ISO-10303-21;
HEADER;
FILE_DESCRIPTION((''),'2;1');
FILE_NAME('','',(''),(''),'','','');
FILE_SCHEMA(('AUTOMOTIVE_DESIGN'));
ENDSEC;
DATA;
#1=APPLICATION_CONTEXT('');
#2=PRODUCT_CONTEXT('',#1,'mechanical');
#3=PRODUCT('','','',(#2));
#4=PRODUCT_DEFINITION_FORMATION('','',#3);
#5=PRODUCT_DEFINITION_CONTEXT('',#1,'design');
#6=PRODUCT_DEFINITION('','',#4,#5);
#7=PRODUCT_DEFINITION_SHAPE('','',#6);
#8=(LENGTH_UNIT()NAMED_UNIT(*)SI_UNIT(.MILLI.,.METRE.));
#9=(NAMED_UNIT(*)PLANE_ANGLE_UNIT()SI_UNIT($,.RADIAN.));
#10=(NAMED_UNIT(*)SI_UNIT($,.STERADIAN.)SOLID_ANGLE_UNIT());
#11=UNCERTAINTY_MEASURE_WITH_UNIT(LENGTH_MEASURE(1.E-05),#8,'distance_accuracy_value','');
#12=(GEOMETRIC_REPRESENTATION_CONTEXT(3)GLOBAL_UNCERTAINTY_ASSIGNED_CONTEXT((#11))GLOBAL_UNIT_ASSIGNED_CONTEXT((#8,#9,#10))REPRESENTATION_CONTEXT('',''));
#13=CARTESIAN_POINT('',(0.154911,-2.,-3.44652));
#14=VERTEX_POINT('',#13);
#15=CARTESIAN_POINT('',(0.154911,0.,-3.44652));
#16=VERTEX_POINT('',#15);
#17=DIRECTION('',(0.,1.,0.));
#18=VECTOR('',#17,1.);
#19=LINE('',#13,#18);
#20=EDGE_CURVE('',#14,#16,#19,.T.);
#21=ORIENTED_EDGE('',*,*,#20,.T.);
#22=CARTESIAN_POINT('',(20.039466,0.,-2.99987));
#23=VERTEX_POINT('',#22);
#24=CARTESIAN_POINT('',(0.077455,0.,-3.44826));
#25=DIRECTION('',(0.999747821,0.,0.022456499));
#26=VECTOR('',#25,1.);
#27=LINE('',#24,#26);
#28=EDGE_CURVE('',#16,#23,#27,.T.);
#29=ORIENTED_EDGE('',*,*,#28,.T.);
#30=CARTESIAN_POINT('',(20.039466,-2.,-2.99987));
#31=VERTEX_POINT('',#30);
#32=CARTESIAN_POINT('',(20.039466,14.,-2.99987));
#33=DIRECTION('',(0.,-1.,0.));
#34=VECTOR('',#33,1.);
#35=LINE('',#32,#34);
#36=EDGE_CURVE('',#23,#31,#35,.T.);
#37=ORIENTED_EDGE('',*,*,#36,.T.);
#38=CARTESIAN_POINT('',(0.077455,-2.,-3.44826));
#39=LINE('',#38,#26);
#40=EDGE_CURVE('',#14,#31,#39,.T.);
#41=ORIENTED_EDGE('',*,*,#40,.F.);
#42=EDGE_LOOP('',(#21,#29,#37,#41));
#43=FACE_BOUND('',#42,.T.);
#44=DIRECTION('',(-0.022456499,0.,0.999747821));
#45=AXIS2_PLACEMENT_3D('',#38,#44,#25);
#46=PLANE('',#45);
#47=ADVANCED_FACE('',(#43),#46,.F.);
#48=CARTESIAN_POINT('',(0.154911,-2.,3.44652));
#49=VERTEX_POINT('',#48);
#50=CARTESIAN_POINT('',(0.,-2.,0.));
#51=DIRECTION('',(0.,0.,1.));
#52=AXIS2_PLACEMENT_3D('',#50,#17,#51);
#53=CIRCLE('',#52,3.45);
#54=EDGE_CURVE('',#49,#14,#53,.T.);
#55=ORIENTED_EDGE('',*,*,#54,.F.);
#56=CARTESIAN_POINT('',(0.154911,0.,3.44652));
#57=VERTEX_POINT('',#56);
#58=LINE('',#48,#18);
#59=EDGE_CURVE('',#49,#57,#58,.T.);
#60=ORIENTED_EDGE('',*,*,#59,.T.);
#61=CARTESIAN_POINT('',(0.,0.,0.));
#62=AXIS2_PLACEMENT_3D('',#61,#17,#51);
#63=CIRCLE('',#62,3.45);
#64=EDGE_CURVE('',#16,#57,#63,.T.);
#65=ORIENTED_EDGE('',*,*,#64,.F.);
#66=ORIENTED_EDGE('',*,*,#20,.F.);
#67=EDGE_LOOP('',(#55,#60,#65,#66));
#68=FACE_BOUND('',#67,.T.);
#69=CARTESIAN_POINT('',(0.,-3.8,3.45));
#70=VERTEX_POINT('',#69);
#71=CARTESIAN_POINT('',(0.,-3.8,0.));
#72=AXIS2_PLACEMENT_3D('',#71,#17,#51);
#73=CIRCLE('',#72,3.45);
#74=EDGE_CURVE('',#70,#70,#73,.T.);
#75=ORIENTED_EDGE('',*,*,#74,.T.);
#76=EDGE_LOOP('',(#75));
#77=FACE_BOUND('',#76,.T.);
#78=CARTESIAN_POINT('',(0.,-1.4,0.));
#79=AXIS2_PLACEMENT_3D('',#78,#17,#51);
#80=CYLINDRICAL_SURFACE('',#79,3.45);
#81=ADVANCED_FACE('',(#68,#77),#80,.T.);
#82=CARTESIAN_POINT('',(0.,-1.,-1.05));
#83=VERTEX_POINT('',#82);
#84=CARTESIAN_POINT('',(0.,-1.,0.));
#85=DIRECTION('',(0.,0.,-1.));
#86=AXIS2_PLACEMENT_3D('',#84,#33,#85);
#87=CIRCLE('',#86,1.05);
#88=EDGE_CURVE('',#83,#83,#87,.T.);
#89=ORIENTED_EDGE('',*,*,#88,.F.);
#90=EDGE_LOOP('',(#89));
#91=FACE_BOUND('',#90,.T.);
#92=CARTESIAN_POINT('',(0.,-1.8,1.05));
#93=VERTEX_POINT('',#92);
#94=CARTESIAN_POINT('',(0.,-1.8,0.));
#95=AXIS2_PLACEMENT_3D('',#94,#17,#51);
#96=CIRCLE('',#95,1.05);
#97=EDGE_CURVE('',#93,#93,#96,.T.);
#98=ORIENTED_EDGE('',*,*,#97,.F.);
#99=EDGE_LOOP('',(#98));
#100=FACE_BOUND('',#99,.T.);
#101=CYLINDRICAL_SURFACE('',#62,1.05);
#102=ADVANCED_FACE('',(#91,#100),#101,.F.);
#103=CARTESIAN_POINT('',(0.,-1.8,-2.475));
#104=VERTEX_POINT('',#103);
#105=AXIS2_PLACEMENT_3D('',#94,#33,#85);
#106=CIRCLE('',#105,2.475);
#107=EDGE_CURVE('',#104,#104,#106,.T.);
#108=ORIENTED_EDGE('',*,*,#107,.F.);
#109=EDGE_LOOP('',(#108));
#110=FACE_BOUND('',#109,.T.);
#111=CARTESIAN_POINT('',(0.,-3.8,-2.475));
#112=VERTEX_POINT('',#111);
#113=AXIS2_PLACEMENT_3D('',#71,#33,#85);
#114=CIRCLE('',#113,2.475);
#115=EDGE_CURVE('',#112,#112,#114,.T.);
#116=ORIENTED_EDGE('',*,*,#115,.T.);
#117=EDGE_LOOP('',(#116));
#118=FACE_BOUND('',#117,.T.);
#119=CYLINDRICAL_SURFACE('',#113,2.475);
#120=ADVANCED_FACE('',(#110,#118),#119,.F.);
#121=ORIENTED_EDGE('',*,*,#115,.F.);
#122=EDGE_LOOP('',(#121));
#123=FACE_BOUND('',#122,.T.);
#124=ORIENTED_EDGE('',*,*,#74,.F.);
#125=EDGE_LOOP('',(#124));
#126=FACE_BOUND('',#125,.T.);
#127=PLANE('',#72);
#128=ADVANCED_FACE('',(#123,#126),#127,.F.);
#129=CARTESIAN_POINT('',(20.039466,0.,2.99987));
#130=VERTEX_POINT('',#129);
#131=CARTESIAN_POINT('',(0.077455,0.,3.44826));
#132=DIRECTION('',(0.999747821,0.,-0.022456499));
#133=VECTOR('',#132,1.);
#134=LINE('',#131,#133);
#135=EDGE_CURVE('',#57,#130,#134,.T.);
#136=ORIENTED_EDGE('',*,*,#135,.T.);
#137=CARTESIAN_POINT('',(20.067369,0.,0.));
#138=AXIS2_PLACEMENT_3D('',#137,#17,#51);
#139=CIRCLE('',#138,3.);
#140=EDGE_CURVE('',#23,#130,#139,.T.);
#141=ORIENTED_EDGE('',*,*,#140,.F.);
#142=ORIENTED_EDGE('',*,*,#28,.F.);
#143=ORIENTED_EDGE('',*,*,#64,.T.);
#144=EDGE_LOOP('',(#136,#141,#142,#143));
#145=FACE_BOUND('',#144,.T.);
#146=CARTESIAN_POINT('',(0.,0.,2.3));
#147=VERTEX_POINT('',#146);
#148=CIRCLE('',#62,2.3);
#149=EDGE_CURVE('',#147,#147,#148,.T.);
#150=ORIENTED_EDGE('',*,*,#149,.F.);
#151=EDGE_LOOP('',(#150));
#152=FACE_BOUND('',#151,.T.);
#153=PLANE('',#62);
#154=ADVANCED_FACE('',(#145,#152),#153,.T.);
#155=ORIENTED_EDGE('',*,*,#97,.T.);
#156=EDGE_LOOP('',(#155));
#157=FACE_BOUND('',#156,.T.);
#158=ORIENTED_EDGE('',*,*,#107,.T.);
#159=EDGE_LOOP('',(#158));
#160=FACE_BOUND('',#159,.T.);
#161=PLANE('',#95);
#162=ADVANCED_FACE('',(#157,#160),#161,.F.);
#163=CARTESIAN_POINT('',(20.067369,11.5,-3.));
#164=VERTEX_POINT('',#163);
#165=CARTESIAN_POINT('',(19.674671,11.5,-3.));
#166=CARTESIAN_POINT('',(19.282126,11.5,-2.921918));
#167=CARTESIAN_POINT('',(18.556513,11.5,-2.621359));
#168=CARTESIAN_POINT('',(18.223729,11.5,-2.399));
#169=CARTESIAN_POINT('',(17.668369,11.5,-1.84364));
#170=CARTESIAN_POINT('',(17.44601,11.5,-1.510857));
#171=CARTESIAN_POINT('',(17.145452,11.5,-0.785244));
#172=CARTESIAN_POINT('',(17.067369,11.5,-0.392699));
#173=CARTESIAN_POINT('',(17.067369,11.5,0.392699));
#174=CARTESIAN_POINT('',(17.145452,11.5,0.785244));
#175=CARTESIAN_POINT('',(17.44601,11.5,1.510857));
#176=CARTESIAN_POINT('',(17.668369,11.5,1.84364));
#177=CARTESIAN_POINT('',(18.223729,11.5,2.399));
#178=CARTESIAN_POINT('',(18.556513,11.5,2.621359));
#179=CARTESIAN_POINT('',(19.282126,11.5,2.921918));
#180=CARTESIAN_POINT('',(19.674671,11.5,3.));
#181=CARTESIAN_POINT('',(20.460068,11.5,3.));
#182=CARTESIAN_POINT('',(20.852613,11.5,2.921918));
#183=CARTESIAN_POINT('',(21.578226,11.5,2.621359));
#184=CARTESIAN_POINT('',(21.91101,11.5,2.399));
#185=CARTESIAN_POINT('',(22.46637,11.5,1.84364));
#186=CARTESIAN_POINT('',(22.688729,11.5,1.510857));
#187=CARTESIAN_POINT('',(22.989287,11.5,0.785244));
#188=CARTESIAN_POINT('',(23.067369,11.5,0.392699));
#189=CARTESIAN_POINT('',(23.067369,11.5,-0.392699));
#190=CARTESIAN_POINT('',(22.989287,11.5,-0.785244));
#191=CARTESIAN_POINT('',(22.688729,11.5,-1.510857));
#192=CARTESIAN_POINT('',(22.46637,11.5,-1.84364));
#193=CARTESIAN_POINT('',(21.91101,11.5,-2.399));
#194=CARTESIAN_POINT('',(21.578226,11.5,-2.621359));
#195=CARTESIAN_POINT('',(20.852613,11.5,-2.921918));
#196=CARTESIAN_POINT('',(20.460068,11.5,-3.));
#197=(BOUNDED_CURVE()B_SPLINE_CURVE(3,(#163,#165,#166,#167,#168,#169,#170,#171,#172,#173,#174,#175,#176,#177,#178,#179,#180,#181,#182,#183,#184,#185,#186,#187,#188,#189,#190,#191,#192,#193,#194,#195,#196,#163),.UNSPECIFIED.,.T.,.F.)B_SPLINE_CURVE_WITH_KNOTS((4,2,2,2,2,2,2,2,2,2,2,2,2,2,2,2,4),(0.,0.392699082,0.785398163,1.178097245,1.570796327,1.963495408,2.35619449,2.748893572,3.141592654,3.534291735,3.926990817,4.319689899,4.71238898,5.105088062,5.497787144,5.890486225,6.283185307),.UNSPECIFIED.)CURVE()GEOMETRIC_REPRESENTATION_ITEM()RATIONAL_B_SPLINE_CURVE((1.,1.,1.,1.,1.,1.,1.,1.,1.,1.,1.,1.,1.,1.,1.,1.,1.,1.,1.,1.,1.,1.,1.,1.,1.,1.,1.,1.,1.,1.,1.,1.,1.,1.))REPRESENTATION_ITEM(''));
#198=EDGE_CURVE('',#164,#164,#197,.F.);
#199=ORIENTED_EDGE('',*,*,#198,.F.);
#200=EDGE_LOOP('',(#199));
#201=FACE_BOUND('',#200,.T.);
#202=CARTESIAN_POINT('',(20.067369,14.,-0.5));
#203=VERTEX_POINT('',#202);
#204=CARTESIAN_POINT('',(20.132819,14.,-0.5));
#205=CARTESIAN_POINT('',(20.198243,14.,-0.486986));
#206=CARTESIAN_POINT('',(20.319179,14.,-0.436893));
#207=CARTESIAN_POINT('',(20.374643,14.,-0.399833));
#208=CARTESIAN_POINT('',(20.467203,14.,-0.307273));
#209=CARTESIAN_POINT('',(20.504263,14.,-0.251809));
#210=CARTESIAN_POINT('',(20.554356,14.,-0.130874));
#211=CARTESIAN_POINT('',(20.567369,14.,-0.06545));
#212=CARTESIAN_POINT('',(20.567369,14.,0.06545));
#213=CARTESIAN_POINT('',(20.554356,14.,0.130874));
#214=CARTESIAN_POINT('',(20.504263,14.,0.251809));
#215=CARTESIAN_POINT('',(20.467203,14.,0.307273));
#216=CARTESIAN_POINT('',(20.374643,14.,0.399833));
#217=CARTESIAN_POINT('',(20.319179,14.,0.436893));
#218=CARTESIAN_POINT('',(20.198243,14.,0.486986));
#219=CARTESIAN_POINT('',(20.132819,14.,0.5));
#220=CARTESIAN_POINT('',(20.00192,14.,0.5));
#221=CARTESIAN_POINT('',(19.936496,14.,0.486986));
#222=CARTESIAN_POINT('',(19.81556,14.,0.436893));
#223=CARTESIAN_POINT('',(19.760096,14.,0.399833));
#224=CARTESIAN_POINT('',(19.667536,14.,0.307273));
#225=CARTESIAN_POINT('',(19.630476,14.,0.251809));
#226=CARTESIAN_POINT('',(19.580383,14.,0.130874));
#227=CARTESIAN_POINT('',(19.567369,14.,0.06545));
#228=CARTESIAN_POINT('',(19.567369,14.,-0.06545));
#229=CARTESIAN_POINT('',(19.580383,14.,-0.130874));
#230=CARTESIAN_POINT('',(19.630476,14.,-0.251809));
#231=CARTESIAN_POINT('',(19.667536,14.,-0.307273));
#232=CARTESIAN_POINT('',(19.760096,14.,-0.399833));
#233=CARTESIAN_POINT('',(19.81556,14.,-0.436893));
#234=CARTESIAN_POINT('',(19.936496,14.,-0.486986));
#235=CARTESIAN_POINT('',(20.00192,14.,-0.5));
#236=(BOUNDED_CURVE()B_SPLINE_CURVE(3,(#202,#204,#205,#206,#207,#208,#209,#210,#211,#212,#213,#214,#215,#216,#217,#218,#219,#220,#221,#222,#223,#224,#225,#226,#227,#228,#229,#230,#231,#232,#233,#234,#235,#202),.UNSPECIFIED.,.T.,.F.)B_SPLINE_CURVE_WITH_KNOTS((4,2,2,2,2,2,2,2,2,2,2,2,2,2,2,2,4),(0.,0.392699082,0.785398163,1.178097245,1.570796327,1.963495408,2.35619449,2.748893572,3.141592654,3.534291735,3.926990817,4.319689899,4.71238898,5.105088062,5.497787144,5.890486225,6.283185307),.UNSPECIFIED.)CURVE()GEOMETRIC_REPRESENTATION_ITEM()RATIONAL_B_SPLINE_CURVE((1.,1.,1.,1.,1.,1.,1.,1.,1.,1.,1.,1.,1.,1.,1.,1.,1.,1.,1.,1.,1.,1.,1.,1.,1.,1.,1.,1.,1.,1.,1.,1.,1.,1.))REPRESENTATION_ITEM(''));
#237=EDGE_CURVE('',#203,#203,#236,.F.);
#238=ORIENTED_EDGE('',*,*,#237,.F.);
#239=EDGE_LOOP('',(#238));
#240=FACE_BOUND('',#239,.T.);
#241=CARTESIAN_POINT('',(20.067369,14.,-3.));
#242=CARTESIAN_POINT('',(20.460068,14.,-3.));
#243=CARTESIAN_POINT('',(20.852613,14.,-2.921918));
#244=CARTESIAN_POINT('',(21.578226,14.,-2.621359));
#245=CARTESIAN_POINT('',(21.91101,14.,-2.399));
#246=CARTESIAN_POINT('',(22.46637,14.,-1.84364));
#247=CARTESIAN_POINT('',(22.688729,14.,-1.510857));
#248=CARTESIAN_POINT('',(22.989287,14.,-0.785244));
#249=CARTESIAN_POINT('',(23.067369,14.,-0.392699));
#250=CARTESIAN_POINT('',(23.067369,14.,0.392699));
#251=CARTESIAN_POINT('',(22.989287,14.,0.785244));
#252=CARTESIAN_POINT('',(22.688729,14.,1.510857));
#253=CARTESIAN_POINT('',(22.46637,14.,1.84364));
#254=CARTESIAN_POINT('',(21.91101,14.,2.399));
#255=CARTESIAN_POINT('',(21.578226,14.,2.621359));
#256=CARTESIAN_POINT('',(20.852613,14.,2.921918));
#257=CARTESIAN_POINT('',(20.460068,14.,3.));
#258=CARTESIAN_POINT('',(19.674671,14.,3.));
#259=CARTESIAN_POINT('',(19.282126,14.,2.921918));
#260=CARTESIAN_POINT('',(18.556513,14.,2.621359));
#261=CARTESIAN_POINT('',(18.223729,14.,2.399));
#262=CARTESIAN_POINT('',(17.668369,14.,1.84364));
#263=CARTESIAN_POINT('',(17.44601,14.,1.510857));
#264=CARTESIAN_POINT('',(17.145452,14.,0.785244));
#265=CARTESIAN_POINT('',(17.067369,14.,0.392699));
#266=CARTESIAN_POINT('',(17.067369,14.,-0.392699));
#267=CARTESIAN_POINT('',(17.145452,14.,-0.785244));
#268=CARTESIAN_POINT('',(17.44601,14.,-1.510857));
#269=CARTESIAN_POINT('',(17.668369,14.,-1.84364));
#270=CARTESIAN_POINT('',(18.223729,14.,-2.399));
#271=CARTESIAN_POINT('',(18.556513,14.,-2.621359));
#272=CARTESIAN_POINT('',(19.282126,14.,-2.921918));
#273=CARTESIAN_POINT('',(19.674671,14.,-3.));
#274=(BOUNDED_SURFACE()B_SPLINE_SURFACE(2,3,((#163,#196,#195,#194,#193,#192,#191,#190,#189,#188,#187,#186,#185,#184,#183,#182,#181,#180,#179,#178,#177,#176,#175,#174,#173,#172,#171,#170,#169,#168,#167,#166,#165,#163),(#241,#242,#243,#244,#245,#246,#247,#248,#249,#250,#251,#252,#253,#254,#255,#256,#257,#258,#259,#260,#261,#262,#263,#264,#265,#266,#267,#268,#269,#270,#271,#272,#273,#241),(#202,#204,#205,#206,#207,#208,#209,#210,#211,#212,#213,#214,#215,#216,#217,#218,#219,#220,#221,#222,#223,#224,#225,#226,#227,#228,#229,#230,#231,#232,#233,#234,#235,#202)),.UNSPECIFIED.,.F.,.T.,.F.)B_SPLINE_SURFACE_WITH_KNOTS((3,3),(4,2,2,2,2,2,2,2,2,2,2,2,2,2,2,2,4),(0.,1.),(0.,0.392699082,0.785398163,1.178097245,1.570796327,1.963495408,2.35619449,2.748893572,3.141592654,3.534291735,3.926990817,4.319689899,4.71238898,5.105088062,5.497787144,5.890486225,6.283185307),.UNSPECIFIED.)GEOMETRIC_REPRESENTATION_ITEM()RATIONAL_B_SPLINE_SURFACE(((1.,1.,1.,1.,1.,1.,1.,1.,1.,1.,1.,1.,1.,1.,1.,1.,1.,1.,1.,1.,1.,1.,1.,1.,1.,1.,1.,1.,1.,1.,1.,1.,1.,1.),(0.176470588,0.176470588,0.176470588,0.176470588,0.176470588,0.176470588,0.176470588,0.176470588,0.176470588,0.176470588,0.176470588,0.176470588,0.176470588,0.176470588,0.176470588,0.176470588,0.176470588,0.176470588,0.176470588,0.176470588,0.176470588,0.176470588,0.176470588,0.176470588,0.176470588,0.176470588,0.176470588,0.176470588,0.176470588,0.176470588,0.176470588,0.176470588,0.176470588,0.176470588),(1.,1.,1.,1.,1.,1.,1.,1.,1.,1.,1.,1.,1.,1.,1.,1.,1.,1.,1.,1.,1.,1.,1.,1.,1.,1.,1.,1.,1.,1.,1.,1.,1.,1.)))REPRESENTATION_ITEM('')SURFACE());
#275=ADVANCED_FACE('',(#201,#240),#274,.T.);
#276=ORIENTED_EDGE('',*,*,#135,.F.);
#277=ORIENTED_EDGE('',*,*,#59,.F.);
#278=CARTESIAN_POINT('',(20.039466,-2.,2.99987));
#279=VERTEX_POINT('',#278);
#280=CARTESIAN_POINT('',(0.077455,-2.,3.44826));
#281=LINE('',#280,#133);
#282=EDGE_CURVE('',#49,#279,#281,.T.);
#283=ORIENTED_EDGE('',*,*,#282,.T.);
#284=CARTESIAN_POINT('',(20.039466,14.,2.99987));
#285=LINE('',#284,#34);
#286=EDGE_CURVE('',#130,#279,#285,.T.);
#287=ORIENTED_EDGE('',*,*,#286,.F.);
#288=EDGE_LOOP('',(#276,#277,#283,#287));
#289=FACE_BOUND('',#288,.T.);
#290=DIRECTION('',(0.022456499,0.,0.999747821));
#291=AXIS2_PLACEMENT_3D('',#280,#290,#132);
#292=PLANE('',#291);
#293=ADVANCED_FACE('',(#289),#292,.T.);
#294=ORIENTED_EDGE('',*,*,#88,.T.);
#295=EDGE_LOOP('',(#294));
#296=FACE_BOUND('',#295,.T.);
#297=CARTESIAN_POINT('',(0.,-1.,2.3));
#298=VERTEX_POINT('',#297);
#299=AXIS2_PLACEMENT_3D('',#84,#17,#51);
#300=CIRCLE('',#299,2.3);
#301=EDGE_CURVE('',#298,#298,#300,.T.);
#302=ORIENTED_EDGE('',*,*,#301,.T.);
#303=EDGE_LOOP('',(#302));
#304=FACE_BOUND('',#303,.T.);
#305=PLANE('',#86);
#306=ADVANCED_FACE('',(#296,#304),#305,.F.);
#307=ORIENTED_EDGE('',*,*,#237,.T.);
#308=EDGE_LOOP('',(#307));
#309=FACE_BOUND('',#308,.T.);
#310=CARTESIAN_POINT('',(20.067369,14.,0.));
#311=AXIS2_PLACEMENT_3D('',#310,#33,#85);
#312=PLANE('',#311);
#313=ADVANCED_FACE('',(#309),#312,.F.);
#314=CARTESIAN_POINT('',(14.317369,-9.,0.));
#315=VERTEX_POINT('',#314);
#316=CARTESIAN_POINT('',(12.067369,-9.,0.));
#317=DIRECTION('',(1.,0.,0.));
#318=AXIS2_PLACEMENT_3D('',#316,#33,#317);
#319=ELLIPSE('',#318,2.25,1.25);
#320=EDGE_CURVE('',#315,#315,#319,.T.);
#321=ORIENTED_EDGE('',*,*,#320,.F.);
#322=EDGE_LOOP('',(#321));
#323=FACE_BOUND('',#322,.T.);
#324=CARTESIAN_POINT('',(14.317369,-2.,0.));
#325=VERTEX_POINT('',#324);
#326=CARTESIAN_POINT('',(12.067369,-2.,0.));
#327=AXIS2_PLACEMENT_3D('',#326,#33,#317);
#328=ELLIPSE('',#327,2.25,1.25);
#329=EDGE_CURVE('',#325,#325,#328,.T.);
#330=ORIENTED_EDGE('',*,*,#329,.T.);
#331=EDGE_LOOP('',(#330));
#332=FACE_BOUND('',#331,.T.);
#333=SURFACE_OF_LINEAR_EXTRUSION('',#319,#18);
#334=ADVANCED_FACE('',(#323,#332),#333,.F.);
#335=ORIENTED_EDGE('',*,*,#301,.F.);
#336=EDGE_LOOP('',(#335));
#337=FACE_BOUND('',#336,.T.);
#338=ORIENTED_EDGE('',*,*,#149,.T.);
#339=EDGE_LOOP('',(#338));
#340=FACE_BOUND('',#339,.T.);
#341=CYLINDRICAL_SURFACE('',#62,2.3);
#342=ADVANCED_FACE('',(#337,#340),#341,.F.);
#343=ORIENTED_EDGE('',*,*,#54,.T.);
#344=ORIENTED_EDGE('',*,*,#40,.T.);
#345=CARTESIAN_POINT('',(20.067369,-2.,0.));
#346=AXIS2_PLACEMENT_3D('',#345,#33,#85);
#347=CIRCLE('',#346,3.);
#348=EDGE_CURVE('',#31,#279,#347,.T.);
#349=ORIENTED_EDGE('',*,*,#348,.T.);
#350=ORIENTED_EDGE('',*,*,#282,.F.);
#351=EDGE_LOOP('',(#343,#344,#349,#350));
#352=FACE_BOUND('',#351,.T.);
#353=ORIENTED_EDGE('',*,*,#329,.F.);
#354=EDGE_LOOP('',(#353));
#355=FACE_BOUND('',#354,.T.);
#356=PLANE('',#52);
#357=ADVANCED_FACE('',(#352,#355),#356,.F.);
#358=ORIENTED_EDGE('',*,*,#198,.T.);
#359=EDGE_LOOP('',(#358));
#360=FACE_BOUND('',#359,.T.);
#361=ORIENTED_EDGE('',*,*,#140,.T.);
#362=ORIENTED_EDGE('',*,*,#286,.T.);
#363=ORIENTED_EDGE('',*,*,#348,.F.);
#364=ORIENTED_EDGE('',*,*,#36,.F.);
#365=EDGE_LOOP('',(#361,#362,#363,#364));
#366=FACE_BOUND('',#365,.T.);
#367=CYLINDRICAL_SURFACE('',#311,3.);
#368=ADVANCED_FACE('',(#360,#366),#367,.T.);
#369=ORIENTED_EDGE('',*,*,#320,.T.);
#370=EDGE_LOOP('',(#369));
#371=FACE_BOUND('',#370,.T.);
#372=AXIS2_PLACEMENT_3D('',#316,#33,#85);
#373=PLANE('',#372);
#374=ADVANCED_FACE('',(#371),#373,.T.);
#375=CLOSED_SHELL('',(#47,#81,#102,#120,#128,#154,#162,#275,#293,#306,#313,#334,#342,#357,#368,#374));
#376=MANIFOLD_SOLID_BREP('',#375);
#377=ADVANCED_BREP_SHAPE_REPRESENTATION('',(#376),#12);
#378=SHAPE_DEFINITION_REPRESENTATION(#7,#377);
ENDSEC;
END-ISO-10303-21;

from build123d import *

# Parameters (mm, degrees)
ESBO_O1_R                = 3.45
RESSALTO_EXTRUS_O1_DEPTH = 1.4
ESBO_O2_R                = 3.45
RESSALTO_EXTRUS_O2_DEPTH = 2.4
FURO1_D                  = 4.95
FURO1_DEPTH              = 2
FURO2_D                  = 4.6
FURO2_DEPTH              = 1
FURO3_D                  = 2.1
BOSS_EXTRUDE1_DEPTH      = 2
SKETCH3_R                = 3
BOSS_EXTRUDE2_DEPTH      = 16
SKETCH4_RX               = 2.25
SKETCH4_RY               = 1.25
BOSS_EXTRUDE3_DEPTH      = 7
FILLET3_SIZE             = 2.5


with BuildPart() as part:
    # Esboço1 → Ressalto-extrusão1 (new body)
    with BuildSketch(Plane(origin=(0, 0, 0), x_dir=(1, 0, 0), z_dir=(0, 1, 0))):
        with Locations(Location((0, 0, 0), (0, 0, 270))):
            Circle(ESBO_O1_R)
    extrude(amount=-RESSALTO_EXTRUS_O1_DEPTH)

    # Esboço2 → Ressalto-extrusão2 (add)
    with BuildSketch(Plane.XZ.offset(1.4)):
        with Locations(Location((0, 0, 0), (0, 0, 90))):
            Circle(ESBO_O2_R)
    extrude(amount=RESSALTO_EXTRUS_O2_DEPTH)

    # Furo1
    with Locations(Plane(origin=(0, -3.8, 0), x_dir=(-1, 0, 0), z_dir=(0, -1, 0))):
        with Locations((0, 0)):
            Hole(FURO1_D / 2, depth=FURO1_DEPTH)

    # Furo2
    with Locations(Plane(origin=(0, 0, 0), x_dir=(1, 0, 0), z_dir=(0, 1, 0))):
        with Locations((0, 0)):
            Hole(FURO2_D / 2, depth=FURO2_DEPTH)

    # Furo3 (through all)
    with Locations(Plane(origin=(0, 0, 0), x_dir=(1, 0, 0), z_dir=(0, 1, 0))):
        with Locations((0, 0)):
            Hole(FURO3_D / 2)

    # Sketch2 → Boss-Extrude1 (add)
    with BuildSketch(Plane(origin=(0, 0, 0), x_dir=(1, 0, 0), z_dir=(0, 1, 0))):
        with BuildLine():
            Line((20.067369497, 2.999243463), (0.154910769, 3.446520369))
            ThreePointArc((0.154910769, 3.446520369), (2.493686243, 2.384120157), (3.45, 0))
            ThreePointArc((3.45, 0), (2.493686243, -2.384120157), (0.154910769, -3.446520369))
            Line((0.154910769, -3.446520369), (20.067369497, -2.999243463))
            ThreePointArc((20.067369497, -2.999243463), (23, 0), (20.067369497, 2.999243463))
        make_face()
    extrude(amount=-BOSS_EXTRUDE1_DEPTH)

    # Sketch3 → Boss-Extrude2 (add)
    with BuildSketch(Plane.XZ.offset(2)):
        with Locations(Location((20.067369497, 0, 0), (0, 0, 270))):
            Circle(SKETCH3_R)
    extrude(amount=-BOSS_EXTRUDE2_DEPTH)

    # Sketch4 → Boss-Extrude3 (add)
    with BuildSketch(Plane.XZ.offset(2)):
        with Locations((12.067369497, 0)):
            Ellipse(SKETCH4_RX, SKETCH4_RY)
    extrude(amount=BOSS_EXTRUDE3_DEPTH)

    # Fillet3
    # a fillet whose section is not a circle: 2.5 mm, written as the material it takes off along each edge
    with BuildSketch(Plane(origin=(20.067369497, 14, 0), x_dir=(0, 0, -1), z_dir=(-1, 0, 0))) as fillet3_piece_1:
        with BuildLine():
            Bezier((3, FILLET3_SIZE), (3, 0), (3 - FILLET3_SIZE, 0), weights=[1, 0.176470588, 1])
            Line((3 - FILLET3_SIZE, 0), (3, 0))
            Line((3, 0), (3, FILLET3_SIZE))
        make_face()
    revolve(axis=Axis((20.067369497, 14, 0), (0, -1, 0)), mode=Mode.SUBTRACT)


solid = part.part
